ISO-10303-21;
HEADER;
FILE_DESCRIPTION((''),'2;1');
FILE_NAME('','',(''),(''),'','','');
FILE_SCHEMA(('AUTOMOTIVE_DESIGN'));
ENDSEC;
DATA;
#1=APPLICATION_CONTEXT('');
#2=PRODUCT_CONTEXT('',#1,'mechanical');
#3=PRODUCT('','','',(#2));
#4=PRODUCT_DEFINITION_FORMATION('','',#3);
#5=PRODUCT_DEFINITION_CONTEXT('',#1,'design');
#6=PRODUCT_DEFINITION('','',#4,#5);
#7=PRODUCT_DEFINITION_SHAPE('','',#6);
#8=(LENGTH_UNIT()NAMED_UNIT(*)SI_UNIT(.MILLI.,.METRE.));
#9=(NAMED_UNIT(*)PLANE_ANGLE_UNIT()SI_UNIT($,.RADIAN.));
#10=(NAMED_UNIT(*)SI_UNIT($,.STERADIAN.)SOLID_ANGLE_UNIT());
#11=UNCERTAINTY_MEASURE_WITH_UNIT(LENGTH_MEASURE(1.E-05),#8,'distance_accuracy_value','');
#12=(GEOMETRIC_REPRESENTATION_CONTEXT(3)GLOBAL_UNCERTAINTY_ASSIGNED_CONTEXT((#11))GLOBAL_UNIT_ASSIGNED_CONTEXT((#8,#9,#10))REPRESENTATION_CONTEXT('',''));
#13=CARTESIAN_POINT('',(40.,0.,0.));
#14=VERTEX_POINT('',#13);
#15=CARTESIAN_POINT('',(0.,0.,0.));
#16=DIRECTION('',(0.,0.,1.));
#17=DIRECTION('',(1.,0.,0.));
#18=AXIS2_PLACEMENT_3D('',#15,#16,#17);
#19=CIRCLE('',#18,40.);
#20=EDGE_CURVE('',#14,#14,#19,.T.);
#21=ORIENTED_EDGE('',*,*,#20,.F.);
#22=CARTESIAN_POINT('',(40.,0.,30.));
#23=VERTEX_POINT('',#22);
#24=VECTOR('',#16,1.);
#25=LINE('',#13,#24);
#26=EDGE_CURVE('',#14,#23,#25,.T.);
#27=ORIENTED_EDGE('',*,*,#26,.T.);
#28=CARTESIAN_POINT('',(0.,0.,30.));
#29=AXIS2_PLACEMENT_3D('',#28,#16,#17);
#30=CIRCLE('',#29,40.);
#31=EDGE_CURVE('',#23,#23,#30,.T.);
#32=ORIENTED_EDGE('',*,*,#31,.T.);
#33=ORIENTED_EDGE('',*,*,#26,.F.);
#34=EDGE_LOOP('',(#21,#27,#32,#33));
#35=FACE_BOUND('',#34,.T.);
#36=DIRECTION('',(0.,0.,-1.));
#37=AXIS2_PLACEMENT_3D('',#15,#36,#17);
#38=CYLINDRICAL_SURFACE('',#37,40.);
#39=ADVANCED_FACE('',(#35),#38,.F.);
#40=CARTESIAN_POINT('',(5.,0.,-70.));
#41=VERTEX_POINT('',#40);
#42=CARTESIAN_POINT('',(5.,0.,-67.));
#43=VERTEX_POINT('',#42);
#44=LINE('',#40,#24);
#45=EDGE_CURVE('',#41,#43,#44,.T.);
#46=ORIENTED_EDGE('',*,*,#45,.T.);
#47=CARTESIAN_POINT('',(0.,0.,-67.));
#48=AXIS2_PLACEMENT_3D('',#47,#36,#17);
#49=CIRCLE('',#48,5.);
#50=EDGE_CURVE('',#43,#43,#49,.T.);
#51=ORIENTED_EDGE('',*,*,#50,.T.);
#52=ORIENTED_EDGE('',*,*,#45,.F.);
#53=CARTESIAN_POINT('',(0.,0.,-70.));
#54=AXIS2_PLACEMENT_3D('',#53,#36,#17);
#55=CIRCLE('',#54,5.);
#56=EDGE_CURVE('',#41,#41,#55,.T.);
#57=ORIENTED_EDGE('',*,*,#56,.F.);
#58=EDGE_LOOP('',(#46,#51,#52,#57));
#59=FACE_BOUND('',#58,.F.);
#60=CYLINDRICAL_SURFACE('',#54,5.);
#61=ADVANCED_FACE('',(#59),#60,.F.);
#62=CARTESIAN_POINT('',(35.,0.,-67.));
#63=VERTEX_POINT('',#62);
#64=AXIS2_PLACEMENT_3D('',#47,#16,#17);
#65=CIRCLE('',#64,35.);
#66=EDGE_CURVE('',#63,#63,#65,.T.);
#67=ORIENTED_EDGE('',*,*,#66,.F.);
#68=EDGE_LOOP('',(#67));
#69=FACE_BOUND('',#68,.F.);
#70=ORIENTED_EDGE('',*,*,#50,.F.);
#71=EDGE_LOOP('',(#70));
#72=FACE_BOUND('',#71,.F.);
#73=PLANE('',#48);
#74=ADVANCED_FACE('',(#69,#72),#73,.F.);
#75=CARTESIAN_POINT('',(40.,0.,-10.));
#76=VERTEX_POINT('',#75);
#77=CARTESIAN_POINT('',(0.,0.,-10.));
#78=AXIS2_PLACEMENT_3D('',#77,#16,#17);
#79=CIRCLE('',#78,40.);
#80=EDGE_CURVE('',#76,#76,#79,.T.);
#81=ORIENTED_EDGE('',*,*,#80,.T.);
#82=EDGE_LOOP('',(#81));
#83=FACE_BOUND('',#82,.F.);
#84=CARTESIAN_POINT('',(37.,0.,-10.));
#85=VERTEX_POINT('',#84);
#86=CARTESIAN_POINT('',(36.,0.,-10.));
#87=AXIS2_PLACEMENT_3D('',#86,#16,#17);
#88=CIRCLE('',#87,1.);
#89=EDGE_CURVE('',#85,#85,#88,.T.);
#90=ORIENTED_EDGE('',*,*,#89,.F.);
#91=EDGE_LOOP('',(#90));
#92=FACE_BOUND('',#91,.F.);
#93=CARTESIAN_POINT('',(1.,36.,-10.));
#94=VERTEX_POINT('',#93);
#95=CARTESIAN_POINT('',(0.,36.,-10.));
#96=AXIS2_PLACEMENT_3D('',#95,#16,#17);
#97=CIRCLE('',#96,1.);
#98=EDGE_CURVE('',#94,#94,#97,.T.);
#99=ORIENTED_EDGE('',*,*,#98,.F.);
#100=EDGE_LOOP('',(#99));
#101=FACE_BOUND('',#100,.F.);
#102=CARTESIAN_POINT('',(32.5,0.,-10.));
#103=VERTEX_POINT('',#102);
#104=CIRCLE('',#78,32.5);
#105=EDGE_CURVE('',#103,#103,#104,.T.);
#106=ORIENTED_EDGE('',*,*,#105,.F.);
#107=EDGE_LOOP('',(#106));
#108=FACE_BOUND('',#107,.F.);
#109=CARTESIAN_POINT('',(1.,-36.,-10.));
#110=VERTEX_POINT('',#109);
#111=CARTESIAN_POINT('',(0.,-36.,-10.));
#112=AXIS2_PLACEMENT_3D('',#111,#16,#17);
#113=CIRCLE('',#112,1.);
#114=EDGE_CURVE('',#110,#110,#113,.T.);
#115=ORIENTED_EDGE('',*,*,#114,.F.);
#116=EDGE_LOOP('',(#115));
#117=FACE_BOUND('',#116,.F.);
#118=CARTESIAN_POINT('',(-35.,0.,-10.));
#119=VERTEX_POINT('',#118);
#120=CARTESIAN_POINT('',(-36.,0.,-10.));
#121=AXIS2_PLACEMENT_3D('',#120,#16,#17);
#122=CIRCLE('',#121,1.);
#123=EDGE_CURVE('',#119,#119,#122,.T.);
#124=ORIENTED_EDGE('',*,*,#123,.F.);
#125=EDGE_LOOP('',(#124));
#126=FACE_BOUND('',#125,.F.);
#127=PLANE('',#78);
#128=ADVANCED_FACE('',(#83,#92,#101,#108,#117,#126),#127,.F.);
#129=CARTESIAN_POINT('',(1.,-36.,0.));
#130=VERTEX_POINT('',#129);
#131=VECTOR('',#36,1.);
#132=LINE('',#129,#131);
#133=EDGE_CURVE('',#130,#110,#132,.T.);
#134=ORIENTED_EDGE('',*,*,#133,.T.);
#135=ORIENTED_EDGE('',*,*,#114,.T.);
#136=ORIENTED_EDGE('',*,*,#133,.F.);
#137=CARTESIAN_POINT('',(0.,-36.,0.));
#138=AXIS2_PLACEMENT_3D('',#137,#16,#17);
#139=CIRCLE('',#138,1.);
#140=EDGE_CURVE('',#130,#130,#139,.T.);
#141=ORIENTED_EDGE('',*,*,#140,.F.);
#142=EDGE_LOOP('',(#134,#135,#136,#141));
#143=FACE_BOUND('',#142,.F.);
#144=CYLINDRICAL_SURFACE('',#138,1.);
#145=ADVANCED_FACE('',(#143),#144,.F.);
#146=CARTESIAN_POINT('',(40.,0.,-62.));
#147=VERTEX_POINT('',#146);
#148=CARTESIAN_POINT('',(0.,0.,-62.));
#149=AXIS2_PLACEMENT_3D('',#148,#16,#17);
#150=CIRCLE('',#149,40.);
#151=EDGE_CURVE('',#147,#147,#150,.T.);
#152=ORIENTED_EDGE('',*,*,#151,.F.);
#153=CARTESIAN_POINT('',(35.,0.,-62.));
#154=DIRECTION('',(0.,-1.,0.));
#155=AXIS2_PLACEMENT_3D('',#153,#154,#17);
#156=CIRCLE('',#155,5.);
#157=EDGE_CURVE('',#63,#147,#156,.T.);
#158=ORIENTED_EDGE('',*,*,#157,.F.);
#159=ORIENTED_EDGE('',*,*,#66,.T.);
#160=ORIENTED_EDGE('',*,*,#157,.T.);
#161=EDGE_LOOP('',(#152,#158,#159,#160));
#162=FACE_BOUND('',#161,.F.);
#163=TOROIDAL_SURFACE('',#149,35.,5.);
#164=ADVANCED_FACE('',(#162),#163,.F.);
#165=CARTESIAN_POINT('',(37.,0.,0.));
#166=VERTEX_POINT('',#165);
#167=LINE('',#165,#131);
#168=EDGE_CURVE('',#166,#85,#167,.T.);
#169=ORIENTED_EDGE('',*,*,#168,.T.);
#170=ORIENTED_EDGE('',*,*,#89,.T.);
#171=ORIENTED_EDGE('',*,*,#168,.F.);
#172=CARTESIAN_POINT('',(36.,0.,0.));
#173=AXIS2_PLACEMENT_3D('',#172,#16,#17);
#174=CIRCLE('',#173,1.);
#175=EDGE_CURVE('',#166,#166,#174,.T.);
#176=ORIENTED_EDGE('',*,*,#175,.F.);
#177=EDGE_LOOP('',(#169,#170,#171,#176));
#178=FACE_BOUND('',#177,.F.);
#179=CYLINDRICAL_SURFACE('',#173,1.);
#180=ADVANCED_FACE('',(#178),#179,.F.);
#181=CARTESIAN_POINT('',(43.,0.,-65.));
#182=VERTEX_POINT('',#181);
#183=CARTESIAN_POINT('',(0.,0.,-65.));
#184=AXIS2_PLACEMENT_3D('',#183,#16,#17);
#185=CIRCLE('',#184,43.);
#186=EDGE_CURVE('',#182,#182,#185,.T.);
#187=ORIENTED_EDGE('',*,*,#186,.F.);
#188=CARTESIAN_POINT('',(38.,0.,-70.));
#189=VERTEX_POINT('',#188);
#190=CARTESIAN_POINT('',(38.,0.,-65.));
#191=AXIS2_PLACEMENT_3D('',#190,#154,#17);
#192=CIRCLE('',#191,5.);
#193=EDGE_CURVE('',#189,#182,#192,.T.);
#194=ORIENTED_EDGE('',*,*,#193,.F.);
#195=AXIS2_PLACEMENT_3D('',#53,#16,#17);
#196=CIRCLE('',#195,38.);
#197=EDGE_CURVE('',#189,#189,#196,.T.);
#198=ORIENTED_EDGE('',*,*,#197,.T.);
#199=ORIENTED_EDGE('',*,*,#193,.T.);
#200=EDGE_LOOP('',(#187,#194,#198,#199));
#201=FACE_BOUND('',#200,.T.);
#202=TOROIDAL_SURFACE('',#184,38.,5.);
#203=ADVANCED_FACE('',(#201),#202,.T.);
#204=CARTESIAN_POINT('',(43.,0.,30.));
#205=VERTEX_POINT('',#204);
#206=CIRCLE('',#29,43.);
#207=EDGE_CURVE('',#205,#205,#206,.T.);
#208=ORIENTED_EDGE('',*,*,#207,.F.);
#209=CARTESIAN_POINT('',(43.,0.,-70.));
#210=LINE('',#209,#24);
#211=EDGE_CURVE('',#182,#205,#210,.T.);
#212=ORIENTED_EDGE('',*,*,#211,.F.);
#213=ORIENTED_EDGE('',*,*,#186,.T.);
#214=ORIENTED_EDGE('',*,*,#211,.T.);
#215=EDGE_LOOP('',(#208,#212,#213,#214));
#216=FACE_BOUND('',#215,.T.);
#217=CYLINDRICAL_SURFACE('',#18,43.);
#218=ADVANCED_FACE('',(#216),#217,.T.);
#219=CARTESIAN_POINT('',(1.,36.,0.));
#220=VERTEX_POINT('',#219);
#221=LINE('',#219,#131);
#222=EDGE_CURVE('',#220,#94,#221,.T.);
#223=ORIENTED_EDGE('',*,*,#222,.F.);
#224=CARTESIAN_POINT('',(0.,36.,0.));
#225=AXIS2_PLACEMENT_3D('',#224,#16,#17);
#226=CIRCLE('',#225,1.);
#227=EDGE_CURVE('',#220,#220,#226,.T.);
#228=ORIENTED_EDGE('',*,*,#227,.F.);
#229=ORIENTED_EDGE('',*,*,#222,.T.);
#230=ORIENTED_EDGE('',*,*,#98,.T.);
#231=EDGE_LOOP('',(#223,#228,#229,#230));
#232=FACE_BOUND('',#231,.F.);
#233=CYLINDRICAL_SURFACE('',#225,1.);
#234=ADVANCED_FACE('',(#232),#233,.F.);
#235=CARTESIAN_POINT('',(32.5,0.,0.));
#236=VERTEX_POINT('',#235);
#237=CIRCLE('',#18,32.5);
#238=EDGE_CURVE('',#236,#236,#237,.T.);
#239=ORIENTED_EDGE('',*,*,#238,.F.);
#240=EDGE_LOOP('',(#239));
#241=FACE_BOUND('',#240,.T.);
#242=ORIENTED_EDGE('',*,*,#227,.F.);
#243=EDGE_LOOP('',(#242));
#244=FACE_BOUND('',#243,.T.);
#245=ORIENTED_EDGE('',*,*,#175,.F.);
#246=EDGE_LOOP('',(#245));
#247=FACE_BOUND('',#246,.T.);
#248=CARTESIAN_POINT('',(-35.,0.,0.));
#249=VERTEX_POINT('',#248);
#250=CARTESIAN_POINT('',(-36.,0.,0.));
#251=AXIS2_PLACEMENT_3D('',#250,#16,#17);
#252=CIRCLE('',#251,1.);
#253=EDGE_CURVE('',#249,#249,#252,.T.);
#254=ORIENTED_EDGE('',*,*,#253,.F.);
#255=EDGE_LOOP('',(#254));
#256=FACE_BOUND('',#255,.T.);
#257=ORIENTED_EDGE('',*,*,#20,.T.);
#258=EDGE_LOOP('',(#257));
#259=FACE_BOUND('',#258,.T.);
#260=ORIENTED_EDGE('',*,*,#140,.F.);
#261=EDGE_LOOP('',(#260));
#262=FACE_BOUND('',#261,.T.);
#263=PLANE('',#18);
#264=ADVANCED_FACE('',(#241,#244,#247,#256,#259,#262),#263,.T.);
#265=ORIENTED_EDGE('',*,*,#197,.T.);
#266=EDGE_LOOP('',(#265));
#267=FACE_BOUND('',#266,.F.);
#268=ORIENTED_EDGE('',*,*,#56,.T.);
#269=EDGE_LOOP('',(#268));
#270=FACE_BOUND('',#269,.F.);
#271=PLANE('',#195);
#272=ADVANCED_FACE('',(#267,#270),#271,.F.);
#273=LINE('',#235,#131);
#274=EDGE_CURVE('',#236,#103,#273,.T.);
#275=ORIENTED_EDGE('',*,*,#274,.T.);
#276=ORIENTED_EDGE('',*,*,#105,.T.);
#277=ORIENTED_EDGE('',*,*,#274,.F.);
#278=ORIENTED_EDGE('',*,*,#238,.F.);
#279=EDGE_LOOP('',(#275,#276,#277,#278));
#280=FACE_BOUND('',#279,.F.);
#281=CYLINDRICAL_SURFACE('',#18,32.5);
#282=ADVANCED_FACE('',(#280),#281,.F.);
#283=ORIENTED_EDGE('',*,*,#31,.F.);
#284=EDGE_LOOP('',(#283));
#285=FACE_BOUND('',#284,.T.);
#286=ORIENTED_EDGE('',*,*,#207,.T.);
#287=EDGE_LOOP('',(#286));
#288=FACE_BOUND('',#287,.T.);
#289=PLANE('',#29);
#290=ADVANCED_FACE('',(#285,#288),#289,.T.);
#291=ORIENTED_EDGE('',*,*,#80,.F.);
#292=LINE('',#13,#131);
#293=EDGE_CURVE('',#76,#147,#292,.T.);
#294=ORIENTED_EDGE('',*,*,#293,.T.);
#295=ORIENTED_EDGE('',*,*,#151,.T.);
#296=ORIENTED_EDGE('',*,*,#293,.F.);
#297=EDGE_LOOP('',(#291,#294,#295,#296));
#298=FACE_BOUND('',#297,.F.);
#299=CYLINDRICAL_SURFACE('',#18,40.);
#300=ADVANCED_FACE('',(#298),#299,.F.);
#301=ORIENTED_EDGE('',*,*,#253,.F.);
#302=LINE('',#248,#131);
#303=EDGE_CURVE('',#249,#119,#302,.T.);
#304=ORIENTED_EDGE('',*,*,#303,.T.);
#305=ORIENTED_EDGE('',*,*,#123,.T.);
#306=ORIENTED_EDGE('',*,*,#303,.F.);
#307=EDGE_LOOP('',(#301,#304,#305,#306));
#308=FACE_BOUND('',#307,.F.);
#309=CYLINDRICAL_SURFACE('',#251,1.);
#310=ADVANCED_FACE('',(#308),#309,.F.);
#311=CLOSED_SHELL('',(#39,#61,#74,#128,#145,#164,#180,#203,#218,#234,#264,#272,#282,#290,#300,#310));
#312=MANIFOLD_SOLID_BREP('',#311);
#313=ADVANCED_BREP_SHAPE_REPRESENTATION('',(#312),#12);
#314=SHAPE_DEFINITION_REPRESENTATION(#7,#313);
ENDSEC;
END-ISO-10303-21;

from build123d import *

# Parameters (mm, degrees)
F0_R     = 43
F0_R_2   = 40
F1_DEPTH = 30
F2_DEPTH = 70
F0_R_3   = 1
F0_R_4   = 32.5
F3_DEPTH = 10
F4_R     = 43
F4_R_2   = 40
F4_R_3   = 5
F5_DEPTH = 3
F6_R     = 5


with BuildPart() as f1:
    # F0 (on Top) → F1 (new body)
    with BuildSketch(Plane.XY):
        Circle(F0_R)
        Circle(F0_R_2, mode=Mode.SUBTRACT)
    extrude(amount=F1_DEPTH)

    # F0 (on Top) → F2 (join)
    with BuildSketch(Plane.XY):
        Circle(F0_R)
        Circle(F0_R_2, mode=Mode.SUBTRACT)
    extrude(amount=-F2_DEPTH)

    # F0 (on Top) → F3 (join)
    with BuildSketch(Plane.XY):
        Circle(F0_R_2)
        with Locations((0, -36)):
            Circle(F0_R_3, mode=Mode.SUBTRACT)
        with Locations((-36, 0)):
            Circle(F0_R_3, mode=Mode.SUBTRACT)
        Circle(F0_R_4, mode=Mode.SUBTRACT)
        with Locations((36, 0)):
            Circle(F0_R_3, mode=Mode.SUBTRACT)
        with Locations((0, 36)):
            Circle(F0_R_3, mode=Mode.SUBTRACT)
    extrude(amount=-F3_DEPTH)

    # F4 (on face) → F5 (join)
    with BuildSketch(Plane(origin=(0, 0, -70), x_dir=(1, 0, 0), z_dir=(0, 0, -1))):
        Circle(F4_R)
        Circle(F4_R_2, mode=Mode.SUBTRACT)
        Circle(F4_R_2)
        Circle(F4_R_3, mode=Mode.SUBTRACT)
    extrude(amount=-F5_DEPTH)

    # F6
    f6_edges = [f1.edges().sort_by_distance(p)[0] for p in [
        (-43, 0, -70),
        (-40, 0, -67),
    ]]
    fillet(f6_edges, radius=F6_R)


solid = f1.part
